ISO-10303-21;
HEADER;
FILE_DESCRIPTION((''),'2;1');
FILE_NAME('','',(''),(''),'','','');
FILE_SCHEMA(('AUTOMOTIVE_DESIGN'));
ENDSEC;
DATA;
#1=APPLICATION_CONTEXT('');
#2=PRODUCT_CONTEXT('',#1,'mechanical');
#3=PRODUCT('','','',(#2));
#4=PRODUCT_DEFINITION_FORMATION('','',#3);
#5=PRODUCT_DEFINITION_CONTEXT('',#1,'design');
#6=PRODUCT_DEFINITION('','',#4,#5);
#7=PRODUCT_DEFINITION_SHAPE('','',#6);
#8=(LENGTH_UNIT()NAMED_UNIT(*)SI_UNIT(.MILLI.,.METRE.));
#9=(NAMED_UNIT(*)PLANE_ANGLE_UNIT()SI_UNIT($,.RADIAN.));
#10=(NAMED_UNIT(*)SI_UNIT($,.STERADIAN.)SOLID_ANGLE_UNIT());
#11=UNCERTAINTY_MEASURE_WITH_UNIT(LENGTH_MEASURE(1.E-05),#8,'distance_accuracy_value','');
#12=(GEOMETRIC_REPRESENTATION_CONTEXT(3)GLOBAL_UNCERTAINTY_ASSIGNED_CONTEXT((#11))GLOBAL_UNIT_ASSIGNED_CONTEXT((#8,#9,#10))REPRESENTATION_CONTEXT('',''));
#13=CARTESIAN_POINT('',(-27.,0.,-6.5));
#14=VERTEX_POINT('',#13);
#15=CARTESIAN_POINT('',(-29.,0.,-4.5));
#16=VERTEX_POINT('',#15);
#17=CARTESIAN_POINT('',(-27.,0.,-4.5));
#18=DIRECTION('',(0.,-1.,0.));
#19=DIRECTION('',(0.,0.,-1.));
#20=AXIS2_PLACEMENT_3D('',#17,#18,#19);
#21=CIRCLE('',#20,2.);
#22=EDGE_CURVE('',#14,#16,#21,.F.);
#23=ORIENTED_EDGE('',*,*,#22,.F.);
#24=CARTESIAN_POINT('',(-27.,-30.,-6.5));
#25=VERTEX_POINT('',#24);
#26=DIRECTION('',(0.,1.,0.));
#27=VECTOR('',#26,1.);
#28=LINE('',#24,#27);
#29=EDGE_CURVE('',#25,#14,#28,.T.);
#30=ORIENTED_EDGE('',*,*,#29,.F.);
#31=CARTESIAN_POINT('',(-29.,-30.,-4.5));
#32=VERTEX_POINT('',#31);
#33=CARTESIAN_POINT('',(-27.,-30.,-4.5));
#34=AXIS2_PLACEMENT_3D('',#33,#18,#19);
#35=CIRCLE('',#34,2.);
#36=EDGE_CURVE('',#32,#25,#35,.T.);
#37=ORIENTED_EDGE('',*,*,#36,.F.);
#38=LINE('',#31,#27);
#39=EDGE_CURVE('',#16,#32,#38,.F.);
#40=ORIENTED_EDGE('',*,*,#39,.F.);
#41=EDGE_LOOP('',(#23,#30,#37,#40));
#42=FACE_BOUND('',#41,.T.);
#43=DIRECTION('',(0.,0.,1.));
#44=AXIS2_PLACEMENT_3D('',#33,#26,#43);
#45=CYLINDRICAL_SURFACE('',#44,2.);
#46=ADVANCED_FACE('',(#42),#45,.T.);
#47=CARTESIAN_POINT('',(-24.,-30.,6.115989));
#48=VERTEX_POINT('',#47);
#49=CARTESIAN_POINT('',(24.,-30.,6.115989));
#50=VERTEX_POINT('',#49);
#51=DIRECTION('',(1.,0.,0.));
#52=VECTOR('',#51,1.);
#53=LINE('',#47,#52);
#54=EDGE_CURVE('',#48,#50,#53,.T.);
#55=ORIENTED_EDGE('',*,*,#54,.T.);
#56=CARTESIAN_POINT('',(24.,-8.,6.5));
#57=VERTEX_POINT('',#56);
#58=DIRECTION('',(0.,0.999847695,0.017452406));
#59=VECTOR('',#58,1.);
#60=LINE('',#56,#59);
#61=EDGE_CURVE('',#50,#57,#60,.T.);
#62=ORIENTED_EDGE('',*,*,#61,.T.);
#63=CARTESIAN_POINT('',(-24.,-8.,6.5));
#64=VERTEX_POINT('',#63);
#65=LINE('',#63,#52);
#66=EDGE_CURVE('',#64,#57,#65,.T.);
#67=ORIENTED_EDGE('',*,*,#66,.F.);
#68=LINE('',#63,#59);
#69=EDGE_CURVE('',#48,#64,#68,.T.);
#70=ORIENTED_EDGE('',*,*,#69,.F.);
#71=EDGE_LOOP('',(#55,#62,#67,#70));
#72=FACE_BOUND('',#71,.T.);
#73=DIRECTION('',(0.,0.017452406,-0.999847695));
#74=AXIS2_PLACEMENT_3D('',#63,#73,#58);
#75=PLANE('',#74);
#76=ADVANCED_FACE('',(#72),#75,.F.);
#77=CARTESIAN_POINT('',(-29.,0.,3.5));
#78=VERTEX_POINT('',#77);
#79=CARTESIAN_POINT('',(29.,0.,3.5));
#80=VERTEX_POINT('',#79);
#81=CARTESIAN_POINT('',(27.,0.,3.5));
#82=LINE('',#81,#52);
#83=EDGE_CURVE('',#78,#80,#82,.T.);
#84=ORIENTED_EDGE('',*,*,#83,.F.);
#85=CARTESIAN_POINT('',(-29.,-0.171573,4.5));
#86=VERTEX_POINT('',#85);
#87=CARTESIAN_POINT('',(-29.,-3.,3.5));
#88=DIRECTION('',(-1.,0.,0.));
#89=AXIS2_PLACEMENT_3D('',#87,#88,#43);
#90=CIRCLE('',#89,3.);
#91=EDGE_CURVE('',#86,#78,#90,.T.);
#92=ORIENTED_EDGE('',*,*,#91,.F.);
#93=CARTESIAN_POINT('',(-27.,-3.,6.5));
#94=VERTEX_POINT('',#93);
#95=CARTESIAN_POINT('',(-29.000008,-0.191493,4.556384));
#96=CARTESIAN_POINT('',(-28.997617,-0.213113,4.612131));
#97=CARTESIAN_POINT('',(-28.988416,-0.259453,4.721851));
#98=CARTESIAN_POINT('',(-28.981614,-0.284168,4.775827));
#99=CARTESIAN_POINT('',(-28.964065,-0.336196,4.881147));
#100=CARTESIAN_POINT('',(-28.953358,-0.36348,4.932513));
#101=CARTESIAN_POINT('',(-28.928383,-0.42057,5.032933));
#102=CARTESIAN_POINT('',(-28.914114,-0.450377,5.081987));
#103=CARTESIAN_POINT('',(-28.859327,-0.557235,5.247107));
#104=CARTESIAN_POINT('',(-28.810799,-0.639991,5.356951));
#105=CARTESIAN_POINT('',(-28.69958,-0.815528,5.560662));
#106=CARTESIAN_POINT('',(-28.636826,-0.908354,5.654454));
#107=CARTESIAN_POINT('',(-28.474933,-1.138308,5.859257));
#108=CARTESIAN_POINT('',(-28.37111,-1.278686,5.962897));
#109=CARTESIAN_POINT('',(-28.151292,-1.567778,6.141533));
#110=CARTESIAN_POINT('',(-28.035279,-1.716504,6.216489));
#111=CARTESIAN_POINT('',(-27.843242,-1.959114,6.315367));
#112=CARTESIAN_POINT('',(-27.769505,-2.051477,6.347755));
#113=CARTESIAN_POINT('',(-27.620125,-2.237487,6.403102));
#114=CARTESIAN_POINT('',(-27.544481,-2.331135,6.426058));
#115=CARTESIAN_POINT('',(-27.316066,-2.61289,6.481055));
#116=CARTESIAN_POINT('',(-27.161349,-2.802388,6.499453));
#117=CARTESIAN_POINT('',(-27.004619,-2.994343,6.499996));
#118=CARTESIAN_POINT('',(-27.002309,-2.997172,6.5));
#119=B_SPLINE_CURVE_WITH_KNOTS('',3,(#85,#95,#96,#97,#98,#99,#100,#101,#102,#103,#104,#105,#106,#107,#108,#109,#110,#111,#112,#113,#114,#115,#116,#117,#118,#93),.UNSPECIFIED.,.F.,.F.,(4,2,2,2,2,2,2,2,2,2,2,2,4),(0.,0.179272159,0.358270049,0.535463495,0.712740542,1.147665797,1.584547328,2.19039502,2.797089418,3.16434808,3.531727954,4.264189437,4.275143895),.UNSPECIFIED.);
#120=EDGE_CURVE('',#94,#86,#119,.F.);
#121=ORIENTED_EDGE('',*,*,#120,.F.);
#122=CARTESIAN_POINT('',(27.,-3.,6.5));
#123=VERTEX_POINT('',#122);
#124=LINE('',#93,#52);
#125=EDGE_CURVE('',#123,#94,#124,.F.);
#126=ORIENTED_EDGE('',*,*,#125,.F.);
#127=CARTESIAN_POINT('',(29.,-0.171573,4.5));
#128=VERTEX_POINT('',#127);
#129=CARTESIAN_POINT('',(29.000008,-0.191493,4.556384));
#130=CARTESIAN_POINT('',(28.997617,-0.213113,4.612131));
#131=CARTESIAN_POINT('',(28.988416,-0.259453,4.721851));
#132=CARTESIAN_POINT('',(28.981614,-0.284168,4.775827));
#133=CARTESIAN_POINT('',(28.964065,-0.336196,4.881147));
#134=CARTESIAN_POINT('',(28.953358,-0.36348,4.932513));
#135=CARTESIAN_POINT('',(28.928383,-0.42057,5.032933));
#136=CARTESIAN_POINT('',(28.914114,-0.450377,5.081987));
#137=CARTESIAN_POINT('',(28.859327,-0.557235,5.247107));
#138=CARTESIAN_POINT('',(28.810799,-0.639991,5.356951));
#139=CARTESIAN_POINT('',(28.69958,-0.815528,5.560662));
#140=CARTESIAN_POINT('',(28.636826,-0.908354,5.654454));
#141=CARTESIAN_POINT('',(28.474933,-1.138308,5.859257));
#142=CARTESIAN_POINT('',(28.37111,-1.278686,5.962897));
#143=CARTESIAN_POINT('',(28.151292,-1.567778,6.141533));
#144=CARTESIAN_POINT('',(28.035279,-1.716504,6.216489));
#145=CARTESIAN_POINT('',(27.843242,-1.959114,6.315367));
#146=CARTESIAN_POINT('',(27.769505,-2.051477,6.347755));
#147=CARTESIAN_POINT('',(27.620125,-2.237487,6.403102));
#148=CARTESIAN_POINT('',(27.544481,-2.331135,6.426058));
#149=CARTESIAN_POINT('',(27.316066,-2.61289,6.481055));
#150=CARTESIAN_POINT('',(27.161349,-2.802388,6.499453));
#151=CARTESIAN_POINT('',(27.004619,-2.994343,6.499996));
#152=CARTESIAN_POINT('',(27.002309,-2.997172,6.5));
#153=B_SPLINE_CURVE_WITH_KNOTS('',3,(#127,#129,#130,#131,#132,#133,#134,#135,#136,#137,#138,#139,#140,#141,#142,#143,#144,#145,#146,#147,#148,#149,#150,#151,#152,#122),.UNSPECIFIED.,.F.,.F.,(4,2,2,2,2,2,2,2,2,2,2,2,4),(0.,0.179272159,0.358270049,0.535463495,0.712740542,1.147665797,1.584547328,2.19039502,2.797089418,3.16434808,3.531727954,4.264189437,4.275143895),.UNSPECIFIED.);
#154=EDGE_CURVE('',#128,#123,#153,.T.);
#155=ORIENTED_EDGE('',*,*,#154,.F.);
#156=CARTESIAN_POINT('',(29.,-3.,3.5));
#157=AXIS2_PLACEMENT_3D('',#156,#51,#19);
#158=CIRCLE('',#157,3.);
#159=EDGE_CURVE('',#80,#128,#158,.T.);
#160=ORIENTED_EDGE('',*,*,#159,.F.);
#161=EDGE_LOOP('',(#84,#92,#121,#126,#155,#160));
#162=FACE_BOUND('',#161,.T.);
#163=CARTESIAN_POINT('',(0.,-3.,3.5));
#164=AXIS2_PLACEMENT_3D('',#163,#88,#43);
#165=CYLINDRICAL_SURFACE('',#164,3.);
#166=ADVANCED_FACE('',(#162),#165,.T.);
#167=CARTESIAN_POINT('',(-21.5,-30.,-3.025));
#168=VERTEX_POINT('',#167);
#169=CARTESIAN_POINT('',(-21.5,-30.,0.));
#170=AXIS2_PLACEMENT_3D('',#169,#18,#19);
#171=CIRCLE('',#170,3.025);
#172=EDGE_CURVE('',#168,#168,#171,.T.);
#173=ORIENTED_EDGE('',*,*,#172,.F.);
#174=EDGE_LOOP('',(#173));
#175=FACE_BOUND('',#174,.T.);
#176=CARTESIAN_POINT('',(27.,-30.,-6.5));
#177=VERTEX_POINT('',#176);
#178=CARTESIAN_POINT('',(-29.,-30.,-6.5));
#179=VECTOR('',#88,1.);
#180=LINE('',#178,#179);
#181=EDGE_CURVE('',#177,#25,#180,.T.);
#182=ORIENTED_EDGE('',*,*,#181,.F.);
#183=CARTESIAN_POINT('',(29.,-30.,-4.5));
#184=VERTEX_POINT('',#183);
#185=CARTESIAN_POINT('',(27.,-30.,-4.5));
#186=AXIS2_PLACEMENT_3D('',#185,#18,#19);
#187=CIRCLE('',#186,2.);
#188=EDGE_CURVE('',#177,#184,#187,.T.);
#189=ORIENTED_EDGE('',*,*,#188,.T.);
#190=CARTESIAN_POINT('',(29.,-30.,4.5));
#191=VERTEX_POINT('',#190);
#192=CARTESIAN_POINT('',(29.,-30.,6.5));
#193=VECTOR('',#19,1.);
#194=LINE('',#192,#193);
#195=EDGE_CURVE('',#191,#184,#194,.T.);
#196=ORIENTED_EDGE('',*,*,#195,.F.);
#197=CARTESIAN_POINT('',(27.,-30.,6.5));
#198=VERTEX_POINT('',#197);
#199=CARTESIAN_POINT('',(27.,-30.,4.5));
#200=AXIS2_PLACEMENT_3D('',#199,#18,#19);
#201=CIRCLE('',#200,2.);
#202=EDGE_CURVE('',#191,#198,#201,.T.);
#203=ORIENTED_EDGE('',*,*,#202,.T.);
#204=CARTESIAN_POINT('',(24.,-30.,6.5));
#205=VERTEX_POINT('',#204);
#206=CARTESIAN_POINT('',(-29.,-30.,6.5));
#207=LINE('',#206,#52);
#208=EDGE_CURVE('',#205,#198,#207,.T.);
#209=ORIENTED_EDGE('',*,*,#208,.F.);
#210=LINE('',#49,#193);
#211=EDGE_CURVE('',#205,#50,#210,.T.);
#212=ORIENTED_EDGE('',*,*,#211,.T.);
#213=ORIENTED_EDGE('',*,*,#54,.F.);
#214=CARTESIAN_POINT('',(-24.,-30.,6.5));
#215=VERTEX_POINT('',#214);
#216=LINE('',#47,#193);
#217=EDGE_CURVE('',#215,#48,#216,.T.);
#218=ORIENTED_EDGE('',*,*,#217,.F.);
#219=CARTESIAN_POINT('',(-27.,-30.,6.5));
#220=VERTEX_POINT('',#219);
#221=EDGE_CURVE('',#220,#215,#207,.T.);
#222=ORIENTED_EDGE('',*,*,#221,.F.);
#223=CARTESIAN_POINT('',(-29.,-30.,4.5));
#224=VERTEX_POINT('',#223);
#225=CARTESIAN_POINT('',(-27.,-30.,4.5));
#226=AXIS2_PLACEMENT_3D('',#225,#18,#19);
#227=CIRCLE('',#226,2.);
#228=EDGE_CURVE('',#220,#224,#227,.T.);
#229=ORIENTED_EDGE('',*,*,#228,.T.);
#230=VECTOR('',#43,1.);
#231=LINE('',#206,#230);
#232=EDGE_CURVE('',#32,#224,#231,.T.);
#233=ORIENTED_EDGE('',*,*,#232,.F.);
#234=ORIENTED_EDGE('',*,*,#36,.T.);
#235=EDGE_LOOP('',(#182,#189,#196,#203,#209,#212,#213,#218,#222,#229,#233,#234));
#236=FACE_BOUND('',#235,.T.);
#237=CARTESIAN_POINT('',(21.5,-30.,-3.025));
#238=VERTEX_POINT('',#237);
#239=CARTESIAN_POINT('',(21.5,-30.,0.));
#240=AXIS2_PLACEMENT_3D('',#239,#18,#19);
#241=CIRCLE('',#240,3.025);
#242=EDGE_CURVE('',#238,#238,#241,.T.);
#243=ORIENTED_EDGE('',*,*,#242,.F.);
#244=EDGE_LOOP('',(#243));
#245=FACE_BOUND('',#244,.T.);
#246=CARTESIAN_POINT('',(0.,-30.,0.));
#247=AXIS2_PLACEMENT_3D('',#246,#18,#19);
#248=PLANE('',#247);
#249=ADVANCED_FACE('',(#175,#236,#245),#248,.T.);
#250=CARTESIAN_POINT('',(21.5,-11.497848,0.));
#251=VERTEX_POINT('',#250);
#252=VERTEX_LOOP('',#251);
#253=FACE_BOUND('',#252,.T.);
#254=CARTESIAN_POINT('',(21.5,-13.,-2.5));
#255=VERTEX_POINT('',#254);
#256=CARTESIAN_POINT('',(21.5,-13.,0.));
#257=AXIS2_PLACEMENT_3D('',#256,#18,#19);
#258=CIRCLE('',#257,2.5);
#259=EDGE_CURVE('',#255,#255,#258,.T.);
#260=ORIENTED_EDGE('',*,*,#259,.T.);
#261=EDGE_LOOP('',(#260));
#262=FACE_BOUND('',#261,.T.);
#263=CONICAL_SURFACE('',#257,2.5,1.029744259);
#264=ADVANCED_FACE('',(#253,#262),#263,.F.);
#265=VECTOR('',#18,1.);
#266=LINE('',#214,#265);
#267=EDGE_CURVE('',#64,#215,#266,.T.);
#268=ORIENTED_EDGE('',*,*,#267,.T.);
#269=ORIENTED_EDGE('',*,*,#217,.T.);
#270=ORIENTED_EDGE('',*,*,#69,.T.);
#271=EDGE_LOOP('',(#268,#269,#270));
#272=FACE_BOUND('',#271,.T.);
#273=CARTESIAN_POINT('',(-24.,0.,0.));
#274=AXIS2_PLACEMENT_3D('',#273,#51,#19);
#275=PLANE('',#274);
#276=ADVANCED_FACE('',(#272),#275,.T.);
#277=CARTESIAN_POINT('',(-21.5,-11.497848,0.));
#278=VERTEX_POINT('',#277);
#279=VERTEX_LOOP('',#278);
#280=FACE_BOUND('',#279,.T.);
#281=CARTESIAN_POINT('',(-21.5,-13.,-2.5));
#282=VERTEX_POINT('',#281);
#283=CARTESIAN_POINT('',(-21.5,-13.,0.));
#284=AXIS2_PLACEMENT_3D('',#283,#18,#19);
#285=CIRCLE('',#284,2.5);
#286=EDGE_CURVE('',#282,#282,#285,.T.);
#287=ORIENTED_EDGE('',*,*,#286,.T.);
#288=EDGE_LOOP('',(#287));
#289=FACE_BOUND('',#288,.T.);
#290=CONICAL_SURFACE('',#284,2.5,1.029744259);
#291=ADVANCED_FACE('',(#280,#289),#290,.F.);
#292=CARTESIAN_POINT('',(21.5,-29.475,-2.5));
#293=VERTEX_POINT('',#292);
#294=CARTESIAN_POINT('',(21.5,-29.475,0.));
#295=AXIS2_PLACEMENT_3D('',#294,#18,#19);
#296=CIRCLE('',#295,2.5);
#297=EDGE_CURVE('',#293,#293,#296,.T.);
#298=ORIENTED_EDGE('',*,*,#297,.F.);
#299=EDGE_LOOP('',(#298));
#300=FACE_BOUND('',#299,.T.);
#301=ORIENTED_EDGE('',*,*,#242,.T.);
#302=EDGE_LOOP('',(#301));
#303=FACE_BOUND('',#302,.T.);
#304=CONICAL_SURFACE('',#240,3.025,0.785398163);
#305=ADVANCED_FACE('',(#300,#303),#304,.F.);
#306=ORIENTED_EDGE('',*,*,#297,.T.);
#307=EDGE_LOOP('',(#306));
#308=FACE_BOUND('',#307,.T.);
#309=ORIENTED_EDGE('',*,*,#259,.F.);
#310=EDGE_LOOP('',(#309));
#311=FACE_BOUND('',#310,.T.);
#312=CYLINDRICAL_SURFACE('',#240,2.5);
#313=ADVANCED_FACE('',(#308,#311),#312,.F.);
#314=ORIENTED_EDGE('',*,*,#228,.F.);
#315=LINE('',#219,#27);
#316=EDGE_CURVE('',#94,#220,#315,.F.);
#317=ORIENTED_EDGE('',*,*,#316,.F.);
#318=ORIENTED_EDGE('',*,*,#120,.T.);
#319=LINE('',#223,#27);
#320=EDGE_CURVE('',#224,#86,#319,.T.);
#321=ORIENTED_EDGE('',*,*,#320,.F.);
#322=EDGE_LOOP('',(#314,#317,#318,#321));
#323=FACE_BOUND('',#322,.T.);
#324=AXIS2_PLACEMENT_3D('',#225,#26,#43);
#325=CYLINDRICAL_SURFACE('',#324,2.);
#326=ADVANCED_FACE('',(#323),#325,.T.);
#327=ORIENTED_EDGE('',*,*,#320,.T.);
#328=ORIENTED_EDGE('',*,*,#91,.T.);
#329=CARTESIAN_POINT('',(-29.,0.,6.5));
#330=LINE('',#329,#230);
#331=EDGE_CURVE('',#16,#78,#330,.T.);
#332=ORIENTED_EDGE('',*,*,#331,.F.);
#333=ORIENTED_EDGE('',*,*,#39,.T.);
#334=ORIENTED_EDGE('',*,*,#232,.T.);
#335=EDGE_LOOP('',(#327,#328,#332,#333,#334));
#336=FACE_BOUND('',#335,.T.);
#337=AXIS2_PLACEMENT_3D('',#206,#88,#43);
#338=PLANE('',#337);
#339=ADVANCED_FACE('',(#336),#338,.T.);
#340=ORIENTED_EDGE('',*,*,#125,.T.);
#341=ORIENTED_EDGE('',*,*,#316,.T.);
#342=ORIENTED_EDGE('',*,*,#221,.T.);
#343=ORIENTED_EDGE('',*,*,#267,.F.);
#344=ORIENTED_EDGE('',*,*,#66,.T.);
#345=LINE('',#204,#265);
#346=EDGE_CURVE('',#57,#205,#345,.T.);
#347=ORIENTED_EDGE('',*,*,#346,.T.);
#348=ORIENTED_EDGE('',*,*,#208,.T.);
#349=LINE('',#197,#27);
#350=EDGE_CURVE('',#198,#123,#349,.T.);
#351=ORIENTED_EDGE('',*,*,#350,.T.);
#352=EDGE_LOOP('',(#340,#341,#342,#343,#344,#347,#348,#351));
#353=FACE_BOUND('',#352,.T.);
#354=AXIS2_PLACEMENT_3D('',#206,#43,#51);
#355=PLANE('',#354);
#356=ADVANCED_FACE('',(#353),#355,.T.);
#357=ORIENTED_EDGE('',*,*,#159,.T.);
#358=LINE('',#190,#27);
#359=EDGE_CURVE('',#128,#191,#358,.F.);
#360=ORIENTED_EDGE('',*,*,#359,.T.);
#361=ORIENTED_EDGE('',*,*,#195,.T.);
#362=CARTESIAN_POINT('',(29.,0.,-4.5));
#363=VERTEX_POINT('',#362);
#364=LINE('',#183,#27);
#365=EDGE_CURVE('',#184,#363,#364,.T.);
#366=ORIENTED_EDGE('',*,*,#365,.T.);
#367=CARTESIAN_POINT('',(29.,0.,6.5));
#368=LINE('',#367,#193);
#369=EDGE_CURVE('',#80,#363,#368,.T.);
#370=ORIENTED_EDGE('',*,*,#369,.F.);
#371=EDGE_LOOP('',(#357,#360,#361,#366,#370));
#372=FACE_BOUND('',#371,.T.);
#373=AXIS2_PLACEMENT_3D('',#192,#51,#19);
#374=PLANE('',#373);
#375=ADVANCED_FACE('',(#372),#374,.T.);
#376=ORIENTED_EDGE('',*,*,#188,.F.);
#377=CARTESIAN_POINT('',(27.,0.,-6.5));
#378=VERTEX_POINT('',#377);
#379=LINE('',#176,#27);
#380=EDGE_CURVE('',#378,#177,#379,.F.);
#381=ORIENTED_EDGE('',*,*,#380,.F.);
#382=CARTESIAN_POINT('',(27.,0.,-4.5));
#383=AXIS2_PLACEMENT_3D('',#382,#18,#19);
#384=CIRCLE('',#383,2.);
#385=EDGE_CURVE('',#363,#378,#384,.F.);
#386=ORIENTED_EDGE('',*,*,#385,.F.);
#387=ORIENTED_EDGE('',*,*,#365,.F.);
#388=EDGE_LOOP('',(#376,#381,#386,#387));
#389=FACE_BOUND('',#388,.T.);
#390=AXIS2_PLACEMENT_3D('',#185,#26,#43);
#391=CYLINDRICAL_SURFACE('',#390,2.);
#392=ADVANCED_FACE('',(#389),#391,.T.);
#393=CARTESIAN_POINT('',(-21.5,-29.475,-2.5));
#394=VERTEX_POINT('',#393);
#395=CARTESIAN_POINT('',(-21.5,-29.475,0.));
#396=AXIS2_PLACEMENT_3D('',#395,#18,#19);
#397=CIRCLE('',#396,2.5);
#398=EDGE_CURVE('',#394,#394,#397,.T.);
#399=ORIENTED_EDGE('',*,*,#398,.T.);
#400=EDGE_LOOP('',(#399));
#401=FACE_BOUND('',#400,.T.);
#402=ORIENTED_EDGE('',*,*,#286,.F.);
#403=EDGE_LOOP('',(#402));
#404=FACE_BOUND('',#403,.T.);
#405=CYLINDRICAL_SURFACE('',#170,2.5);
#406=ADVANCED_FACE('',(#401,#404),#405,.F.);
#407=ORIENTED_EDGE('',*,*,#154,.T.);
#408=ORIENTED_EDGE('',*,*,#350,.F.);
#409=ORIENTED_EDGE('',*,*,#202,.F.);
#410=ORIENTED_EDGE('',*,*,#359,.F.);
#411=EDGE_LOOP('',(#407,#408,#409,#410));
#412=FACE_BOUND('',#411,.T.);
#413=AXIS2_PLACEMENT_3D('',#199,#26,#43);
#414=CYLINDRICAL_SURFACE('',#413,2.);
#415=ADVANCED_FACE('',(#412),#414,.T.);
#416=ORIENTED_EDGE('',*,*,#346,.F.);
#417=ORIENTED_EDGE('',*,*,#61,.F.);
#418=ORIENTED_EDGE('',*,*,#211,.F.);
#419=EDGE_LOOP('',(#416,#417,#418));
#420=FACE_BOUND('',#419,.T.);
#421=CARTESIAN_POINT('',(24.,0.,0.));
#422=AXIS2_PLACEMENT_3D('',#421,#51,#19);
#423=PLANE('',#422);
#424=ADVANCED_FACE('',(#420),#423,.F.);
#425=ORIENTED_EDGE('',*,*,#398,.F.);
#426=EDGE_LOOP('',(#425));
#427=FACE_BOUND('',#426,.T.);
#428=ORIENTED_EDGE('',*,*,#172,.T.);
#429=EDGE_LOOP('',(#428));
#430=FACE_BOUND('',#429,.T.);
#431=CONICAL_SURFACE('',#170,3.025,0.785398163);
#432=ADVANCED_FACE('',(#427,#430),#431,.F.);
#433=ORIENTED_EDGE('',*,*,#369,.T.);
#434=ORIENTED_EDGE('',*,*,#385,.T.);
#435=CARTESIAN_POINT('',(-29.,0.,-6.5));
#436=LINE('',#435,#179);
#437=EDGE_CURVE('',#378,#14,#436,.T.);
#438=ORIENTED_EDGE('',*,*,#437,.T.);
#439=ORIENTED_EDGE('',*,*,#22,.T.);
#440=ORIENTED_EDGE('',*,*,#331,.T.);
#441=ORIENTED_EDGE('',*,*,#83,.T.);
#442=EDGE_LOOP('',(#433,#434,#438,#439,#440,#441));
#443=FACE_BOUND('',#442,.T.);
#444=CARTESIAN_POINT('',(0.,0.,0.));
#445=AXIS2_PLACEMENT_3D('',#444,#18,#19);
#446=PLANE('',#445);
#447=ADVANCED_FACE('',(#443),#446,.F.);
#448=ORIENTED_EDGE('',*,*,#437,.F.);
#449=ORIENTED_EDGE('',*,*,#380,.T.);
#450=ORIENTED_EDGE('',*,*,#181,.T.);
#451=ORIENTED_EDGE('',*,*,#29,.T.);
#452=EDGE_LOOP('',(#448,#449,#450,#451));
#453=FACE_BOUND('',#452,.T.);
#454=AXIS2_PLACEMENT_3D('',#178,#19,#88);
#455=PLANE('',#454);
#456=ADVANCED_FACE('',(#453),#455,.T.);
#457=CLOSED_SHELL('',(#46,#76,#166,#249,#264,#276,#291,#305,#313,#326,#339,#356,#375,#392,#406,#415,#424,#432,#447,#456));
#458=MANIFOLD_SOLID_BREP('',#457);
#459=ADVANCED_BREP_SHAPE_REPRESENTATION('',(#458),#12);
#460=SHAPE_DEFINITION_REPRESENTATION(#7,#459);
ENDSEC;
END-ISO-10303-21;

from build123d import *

# Parameters (mm, degrees)
SKETCH1_W                   = 58
SKETCH1_H                   = 13
BOSS_EXTRUDE1_DEPTH         = 30
FILLET1_R                   = 2
FILLET2_R                   = 3
M6_TAPPED_HOLE1_D           = 5
M6_TAPPED_HOLE1_DEPTH       = 17
M6_TAPPED_HOLE1_CSINK_D     = 6.05
M6_TAPPED_HOLE1_CSINK_ANGLE = 90
M6_TAPPED_HOLE1_TIP         = 1.502151548
CUT_EXTRUDE1_DEPTH          = 24


with BuildPart() as part:
    # Sketch1 → Boss-Extrude1 (new body)
    with BuildSketch(Plane(origin=(0, 0, 0), x_dir=(1, 0, 0), z_dir=(0, 1, 0))):
        Rectangle(SKETCH1_W, SKETCH1_H)
    extrude(amount=-BOSS_EXTRUDE1_DEPTH)

    # Fillet1
    fillet1_edges = [part.edges().sort_by_distance(p)[0] for p in [
        (29, -15, 6.5),
        (-29, -15, 6.5),
        (-29, -15, -6.5),
        (29, -15, -6.5),
    ]]
    fillet(fillet1_edges, radius=FILLET1_R)

    # Fillet2
    # the kernel refuses this fillet: 3 mm, written as the material it takes off along each edge
    with BuildSketch(Plane(origin=(-34.5, 0, 6.5), x_dir=(0, -1, 0), z_dir=(1, 0, 0))) as fillet2_piece_1:
        with BuildLine():
            CenterArc((FILLET2_R, FILLET2_R), FILLET2_R, 180, 90)
            Line((0, FILLET2_R), (0, 0))
            Line((0, 0), (FILLET2_R, 0))
        make_face()
    extrude(amount=69, mode=Mode.SUBTRACT)

    # M6 Tapped Hole1
    with Locations(Plane(origin=(0, -30, 0), x_dir=(-1, 0, 0), z_dir=(0, -1, 0))):
        with Locations((-21.5, 0), (21.5, 0)):
            CounterSinkHole(M6_TAPPED_HOLE1_D / 2, M6_TAPPED_HOLE1_CSINK_D / 2, depth=M6_TAPPED_HOLE1_DEPTH, counter_sink_angle=M6_TAPPED_HOLE1_CSINK_ANGLE)
            with Locations((0, 0, -(M6_TAPPED_HOLE1_DEPTH + M6_TAPPED_HOLE1_TIP / 2))):  # 118° drill point
                Cone(0, M6_TAPPED_HOLE1_D / 2, M6_TAPPED_HOLE1_TIP, mode=Mode.SUBTRACT)

    # Sketch5 → Cut-Extrude1 (cut, symmetric)
    with BuildSketch(Plane(origin=(0, 0, 0), x_dir=(0, 0, -1), z_dir=(1, 0, 0))):
        Polygon((-6.5, -8), (-6.115988572, -30), (-6.5, -30), align=None)
    extrude(amount=CUT_EXTRUDE1_DEPTH, both=True, mode=Mode.SUBTRACT)


solid = part.part
